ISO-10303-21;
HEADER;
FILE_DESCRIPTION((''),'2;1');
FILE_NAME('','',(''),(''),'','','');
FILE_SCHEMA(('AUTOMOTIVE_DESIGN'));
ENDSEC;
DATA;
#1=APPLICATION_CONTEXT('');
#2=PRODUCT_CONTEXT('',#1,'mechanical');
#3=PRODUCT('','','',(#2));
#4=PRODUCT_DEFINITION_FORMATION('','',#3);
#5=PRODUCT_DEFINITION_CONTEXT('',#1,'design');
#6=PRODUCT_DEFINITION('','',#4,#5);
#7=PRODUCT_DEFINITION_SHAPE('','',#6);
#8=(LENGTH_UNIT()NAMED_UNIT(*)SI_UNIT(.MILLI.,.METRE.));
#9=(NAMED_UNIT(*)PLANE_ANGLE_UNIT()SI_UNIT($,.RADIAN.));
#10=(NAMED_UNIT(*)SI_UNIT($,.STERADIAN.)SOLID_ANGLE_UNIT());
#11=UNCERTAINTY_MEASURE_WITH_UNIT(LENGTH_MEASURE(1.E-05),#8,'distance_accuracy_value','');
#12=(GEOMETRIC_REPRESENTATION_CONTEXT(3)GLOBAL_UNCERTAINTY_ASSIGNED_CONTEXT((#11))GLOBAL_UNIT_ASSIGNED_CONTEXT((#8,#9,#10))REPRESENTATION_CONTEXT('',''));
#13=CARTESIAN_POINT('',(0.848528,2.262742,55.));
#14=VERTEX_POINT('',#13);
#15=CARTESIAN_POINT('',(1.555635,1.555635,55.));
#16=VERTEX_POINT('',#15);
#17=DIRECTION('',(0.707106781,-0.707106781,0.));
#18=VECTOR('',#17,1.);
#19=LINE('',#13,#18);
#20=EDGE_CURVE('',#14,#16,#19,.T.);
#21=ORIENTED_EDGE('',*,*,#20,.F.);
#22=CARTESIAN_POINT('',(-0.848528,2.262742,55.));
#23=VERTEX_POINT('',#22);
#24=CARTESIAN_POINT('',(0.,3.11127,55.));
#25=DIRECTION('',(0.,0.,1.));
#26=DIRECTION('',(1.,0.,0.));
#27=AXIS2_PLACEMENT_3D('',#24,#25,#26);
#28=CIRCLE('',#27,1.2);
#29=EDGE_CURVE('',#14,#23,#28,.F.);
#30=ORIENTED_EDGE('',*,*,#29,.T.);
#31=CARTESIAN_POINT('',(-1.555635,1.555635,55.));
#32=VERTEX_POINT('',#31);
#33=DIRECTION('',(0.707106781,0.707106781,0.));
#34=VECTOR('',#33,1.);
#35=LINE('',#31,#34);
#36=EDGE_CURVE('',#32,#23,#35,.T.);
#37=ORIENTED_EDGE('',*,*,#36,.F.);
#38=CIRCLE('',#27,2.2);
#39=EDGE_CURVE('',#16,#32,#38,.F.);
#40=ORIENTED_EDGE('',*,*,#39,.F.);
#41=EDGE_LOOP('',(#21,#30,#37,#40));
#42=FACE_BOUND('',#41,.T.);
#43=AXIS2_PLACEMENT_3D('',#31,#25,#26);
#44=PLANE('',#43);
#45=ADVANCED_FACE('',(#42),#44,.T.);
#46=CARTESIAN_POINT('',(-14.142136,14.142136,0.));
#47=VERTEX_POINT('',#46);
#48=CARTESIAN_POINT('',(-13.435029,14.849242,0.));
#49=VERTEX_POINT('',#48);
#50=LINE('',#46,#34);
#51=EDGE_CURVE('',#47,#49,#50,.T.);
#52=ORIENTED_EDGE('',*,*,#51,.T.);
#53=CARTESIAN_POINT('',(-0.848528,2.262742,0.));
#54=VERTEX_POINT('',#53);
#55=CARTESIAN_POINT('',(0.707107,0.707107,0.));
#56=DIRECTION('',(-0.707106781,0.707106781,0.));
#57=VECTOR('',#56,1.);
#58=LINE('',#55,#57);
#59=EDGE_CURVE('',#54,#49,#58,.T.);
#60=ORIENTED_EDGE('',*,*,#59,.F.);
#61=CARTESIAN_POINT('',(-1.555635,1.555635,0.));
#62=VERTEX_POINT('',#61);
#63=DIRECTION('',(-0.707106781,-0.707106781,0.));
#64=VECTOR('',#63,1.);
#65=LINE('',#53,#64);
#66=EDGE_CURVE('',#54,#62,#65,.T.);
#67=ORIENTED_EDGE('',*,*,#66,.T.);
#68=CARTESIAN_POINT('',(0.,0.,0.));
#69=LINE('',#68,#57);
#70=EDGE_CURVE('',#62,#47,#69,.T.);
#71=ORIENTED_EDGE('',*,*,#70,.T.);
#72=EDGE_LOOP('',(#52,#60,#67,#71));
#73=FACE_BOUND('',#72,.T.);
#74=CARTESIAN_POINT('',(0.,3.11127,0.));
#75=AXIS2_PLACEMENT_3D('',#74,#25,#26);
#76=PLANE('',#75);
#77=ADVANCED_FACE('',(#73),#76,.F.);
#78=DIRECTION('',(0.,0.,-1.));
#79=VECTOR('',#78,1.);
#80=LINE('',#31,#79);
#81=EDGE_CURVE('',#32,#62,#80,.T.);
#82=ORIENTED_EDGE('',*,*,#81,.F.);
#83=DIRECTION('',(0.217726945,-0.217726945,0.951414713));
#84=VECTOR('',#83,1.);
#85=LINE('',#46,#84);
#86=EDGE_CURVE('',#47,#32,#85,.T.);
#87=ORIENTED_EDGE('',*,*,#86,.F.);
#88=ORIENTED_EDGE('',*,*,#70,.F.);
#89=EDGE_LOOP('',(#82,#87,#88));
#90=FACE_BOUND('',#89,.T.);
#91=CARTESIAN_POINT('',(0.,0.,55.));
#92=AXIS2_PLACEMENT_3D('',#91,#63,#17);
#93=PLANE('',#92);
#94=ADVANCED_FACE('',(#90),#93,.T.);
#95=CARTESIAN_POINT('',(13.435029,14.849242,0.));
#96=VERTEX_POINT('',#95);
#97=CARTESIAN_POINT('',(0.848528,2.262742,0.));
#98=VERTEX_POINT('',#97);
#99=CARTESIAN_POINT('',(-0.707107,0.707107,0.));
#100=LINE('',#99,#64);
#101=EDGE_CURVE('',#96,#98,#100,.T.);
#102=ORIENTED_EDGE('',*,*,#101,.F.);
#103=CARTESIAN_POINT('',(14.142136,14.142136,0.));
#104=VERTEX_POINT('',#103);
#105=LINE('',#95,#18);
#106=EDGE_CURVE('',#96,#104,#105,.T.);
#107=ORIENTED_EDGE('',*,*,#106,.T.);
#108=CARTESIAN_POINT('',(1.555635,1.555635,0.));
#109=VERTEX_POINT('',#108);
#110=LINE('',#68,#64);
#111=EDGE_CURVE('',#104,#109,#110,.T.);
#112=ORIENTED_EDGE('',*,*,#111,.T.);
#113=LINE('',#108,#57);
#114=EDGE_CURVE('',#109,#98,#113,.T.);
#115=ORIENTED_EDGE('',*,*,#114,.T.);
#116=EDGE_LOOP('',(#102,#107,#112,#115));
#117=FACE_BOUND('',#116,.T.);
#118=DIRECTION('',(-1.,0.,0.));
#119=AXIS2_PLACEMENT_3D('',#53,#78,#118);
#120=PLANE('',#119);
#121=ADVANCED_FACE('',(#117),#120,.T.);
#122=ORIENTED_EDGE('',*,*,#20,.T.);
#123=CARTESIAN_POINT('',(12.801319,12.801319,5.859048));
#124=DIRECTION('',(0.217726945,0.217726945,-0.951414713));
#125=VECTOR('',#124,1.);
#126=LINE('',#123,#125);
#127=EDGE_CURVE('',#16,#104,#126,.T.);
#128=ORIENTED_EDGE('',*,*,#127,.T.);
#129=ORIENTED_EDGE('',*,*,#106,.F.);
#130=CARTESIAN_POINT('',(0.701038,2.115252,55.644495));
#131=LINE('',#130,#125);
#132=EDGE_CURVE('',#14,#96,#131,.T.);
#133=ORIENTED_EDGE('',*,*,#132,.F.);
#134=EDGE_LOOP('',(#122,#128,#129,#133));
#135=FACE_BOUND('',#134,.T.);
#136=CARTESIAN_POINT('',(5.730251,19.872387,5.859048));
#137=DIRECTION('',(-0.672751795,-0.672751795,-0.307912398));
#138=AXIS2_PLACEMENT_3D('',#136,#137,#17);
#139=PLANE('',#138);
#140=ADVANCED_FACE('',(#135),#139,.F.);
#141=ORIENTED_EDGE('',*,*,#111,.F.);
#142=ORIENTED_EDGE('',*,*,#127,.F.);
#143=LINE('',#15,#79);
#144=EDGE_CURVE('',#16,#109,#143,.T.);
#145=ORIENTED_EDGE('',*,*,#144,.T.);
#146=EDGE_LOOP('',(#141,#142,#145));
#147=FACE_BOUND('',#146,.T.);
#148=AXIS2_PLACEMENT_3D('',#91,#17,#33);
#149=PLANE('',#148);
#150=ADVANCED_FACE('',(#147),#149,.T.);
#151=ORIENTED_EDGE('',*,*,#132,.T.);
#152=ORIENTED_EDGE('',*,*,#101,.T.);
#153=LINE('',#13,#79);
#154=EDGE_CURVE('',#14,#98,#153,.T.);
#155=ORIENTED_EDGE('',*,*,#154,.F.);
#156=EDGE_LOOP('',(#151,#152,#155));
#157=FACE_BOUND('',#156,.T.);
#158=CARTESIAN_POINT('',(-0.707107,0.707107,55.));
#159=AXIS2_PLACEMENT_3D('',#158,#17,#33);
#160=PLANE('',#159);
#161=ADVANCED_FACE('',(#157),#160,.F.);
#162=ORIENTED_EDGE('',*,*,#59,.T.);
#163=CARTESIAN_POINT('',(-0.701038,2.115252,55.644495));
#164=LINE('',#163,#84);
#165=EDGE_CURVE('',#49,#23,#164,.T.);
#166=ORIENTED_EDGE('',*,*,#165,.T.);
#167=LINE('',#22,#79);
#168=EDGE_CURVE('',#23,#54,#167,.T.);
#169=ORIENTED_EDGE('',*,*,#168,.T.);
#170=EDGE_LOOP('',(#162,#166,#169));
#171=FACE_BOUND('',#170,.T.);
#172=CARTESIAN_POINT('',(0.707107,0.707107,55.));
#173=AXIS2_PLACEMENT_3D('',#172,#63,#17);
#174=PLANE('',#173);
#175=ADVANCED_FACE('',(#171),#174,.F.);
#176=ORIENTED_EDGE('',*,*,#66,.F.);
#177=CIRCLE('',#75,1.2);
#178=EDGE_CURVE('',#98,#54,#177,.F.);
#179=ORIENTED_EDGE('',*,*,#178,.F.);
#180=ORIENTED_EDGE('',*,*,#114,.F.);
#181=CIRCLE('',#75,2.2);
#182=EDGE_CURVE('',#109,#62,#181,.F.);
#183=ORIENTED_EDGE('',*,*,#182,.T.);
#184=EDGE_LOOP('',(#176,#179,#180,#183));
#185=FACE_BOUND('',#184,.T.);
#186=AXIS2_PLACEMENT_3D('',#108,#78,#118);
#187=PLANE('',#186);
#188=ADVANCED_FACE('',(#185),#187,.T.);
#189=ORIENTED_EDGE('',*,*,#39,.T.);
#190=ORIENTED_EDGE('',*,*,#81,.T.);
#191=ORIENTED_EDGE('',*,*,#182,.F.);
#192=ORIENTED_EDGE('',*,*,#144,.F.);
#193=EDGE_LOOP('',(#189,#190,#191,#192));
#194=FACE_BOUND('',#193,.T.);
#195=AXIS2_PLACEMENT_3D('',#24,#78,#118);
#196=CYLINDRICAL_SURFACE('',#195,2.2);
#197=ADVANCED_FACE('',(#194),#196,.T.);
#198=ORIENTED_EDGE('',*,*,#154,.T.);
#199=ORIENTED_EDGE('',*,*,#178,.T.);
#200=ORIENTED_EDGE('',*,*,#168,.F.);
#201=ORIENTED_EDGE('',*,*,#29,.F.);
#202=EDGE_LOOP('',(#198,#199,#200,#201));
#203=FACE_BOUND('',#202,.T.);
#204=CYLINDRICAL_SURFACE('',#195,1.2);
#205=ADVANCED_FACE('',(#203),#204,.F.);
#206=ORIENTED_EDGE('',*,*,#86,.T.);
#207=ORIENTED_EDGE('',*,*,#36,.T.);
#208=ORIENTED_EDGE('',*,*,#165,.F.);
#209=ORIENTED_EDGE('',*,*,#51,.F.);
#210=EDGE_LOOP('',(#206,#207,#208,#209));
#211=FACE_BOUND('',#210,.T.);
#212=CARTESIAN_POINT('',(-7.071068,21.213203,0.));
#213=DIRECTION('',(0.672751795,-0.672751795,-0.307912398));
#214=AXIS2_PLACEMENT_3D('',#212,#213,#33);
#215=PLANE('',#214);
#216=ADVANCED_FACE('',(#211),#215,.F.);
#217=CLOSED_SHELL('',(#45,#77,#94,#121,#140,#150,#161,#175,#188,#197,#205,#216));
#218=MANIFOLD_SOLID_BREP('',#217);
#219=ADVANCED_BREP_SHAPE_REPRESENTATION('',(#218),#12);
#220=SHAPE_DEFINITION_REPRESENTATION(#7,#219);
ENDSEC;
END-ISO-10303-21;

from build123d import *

# Parameters (mm, degrees)
BASE_FLANGE1_DEPTH = 55
CUT_EXTRUDE1_DEPTH = 10
CUT_EXTRUDE2_DEPTH = 10


# Read off the part's stored shape, not the designer's step: Base-Flange1
with BuildPart() as part:
    # Base-Flange1 outline → Base-Flange1 (new body)
    with BuildSketch(Plane.XY):
        with BuildLine():
            Line((-0.848528137, 2.2627417), (-13.435028843, 14.849242405))
            Line((-13.435028843, 14.849242405), (-14.142135624, 14.142135624))
            Line((-14.142135624, 14.142135624), (-1.555634919, 1.555634919))
            ThreePointArc((-1.555634919, 1.555634919), (0, 0.911269837), (1.555634919, 1.555634919))
            Line((1.555634919, 1.555634919), (14.142135624, 14.142135624))
            Line((14.142135624, 14.142135624), (13.435028843, 14.849242405))
            Line((13.435028843, 14.849242405), (0.848528137, 2.2627417))
            ThreePointArc((0.848528137, 2.2627417), (0, 1.911269837), (-0.848528137, 2.2627417))
        make_face()
    extrude(amount=BASE_FLANGE1_DEPTH)

    # Sketch6 → Cut-Extrude1 (cut)
    with BuildSketch(Plane(origin=(0, 0, 0), x_dir=(0, 0, 1), z_dir=(-0.7071067811865477, -0.7071067811865475, 0))):
        Polygon((0, 20), (55, 2.2), (55, 20), align=None)
    extrude(amount=-CUT_EXTRUDE1_DEPTH, mode=Mode.SUBTRACT)

    # Sketch7 → Cut-Extrude2 (cut)
    with BuildSketch(Plane(origin=(0, 0, 0), x_dir=(0, 0, -1), z_dir=(0.7071067811865488, -0.7071067811865462, 0))):
        Polygon((-55, 2.2), (0, 20), (-55, 20), align=None)
    extrude(amount=-CUT_EXTRUDE2_DEPTH, mode=Mode.SUBTRACT)


solid = part.part
